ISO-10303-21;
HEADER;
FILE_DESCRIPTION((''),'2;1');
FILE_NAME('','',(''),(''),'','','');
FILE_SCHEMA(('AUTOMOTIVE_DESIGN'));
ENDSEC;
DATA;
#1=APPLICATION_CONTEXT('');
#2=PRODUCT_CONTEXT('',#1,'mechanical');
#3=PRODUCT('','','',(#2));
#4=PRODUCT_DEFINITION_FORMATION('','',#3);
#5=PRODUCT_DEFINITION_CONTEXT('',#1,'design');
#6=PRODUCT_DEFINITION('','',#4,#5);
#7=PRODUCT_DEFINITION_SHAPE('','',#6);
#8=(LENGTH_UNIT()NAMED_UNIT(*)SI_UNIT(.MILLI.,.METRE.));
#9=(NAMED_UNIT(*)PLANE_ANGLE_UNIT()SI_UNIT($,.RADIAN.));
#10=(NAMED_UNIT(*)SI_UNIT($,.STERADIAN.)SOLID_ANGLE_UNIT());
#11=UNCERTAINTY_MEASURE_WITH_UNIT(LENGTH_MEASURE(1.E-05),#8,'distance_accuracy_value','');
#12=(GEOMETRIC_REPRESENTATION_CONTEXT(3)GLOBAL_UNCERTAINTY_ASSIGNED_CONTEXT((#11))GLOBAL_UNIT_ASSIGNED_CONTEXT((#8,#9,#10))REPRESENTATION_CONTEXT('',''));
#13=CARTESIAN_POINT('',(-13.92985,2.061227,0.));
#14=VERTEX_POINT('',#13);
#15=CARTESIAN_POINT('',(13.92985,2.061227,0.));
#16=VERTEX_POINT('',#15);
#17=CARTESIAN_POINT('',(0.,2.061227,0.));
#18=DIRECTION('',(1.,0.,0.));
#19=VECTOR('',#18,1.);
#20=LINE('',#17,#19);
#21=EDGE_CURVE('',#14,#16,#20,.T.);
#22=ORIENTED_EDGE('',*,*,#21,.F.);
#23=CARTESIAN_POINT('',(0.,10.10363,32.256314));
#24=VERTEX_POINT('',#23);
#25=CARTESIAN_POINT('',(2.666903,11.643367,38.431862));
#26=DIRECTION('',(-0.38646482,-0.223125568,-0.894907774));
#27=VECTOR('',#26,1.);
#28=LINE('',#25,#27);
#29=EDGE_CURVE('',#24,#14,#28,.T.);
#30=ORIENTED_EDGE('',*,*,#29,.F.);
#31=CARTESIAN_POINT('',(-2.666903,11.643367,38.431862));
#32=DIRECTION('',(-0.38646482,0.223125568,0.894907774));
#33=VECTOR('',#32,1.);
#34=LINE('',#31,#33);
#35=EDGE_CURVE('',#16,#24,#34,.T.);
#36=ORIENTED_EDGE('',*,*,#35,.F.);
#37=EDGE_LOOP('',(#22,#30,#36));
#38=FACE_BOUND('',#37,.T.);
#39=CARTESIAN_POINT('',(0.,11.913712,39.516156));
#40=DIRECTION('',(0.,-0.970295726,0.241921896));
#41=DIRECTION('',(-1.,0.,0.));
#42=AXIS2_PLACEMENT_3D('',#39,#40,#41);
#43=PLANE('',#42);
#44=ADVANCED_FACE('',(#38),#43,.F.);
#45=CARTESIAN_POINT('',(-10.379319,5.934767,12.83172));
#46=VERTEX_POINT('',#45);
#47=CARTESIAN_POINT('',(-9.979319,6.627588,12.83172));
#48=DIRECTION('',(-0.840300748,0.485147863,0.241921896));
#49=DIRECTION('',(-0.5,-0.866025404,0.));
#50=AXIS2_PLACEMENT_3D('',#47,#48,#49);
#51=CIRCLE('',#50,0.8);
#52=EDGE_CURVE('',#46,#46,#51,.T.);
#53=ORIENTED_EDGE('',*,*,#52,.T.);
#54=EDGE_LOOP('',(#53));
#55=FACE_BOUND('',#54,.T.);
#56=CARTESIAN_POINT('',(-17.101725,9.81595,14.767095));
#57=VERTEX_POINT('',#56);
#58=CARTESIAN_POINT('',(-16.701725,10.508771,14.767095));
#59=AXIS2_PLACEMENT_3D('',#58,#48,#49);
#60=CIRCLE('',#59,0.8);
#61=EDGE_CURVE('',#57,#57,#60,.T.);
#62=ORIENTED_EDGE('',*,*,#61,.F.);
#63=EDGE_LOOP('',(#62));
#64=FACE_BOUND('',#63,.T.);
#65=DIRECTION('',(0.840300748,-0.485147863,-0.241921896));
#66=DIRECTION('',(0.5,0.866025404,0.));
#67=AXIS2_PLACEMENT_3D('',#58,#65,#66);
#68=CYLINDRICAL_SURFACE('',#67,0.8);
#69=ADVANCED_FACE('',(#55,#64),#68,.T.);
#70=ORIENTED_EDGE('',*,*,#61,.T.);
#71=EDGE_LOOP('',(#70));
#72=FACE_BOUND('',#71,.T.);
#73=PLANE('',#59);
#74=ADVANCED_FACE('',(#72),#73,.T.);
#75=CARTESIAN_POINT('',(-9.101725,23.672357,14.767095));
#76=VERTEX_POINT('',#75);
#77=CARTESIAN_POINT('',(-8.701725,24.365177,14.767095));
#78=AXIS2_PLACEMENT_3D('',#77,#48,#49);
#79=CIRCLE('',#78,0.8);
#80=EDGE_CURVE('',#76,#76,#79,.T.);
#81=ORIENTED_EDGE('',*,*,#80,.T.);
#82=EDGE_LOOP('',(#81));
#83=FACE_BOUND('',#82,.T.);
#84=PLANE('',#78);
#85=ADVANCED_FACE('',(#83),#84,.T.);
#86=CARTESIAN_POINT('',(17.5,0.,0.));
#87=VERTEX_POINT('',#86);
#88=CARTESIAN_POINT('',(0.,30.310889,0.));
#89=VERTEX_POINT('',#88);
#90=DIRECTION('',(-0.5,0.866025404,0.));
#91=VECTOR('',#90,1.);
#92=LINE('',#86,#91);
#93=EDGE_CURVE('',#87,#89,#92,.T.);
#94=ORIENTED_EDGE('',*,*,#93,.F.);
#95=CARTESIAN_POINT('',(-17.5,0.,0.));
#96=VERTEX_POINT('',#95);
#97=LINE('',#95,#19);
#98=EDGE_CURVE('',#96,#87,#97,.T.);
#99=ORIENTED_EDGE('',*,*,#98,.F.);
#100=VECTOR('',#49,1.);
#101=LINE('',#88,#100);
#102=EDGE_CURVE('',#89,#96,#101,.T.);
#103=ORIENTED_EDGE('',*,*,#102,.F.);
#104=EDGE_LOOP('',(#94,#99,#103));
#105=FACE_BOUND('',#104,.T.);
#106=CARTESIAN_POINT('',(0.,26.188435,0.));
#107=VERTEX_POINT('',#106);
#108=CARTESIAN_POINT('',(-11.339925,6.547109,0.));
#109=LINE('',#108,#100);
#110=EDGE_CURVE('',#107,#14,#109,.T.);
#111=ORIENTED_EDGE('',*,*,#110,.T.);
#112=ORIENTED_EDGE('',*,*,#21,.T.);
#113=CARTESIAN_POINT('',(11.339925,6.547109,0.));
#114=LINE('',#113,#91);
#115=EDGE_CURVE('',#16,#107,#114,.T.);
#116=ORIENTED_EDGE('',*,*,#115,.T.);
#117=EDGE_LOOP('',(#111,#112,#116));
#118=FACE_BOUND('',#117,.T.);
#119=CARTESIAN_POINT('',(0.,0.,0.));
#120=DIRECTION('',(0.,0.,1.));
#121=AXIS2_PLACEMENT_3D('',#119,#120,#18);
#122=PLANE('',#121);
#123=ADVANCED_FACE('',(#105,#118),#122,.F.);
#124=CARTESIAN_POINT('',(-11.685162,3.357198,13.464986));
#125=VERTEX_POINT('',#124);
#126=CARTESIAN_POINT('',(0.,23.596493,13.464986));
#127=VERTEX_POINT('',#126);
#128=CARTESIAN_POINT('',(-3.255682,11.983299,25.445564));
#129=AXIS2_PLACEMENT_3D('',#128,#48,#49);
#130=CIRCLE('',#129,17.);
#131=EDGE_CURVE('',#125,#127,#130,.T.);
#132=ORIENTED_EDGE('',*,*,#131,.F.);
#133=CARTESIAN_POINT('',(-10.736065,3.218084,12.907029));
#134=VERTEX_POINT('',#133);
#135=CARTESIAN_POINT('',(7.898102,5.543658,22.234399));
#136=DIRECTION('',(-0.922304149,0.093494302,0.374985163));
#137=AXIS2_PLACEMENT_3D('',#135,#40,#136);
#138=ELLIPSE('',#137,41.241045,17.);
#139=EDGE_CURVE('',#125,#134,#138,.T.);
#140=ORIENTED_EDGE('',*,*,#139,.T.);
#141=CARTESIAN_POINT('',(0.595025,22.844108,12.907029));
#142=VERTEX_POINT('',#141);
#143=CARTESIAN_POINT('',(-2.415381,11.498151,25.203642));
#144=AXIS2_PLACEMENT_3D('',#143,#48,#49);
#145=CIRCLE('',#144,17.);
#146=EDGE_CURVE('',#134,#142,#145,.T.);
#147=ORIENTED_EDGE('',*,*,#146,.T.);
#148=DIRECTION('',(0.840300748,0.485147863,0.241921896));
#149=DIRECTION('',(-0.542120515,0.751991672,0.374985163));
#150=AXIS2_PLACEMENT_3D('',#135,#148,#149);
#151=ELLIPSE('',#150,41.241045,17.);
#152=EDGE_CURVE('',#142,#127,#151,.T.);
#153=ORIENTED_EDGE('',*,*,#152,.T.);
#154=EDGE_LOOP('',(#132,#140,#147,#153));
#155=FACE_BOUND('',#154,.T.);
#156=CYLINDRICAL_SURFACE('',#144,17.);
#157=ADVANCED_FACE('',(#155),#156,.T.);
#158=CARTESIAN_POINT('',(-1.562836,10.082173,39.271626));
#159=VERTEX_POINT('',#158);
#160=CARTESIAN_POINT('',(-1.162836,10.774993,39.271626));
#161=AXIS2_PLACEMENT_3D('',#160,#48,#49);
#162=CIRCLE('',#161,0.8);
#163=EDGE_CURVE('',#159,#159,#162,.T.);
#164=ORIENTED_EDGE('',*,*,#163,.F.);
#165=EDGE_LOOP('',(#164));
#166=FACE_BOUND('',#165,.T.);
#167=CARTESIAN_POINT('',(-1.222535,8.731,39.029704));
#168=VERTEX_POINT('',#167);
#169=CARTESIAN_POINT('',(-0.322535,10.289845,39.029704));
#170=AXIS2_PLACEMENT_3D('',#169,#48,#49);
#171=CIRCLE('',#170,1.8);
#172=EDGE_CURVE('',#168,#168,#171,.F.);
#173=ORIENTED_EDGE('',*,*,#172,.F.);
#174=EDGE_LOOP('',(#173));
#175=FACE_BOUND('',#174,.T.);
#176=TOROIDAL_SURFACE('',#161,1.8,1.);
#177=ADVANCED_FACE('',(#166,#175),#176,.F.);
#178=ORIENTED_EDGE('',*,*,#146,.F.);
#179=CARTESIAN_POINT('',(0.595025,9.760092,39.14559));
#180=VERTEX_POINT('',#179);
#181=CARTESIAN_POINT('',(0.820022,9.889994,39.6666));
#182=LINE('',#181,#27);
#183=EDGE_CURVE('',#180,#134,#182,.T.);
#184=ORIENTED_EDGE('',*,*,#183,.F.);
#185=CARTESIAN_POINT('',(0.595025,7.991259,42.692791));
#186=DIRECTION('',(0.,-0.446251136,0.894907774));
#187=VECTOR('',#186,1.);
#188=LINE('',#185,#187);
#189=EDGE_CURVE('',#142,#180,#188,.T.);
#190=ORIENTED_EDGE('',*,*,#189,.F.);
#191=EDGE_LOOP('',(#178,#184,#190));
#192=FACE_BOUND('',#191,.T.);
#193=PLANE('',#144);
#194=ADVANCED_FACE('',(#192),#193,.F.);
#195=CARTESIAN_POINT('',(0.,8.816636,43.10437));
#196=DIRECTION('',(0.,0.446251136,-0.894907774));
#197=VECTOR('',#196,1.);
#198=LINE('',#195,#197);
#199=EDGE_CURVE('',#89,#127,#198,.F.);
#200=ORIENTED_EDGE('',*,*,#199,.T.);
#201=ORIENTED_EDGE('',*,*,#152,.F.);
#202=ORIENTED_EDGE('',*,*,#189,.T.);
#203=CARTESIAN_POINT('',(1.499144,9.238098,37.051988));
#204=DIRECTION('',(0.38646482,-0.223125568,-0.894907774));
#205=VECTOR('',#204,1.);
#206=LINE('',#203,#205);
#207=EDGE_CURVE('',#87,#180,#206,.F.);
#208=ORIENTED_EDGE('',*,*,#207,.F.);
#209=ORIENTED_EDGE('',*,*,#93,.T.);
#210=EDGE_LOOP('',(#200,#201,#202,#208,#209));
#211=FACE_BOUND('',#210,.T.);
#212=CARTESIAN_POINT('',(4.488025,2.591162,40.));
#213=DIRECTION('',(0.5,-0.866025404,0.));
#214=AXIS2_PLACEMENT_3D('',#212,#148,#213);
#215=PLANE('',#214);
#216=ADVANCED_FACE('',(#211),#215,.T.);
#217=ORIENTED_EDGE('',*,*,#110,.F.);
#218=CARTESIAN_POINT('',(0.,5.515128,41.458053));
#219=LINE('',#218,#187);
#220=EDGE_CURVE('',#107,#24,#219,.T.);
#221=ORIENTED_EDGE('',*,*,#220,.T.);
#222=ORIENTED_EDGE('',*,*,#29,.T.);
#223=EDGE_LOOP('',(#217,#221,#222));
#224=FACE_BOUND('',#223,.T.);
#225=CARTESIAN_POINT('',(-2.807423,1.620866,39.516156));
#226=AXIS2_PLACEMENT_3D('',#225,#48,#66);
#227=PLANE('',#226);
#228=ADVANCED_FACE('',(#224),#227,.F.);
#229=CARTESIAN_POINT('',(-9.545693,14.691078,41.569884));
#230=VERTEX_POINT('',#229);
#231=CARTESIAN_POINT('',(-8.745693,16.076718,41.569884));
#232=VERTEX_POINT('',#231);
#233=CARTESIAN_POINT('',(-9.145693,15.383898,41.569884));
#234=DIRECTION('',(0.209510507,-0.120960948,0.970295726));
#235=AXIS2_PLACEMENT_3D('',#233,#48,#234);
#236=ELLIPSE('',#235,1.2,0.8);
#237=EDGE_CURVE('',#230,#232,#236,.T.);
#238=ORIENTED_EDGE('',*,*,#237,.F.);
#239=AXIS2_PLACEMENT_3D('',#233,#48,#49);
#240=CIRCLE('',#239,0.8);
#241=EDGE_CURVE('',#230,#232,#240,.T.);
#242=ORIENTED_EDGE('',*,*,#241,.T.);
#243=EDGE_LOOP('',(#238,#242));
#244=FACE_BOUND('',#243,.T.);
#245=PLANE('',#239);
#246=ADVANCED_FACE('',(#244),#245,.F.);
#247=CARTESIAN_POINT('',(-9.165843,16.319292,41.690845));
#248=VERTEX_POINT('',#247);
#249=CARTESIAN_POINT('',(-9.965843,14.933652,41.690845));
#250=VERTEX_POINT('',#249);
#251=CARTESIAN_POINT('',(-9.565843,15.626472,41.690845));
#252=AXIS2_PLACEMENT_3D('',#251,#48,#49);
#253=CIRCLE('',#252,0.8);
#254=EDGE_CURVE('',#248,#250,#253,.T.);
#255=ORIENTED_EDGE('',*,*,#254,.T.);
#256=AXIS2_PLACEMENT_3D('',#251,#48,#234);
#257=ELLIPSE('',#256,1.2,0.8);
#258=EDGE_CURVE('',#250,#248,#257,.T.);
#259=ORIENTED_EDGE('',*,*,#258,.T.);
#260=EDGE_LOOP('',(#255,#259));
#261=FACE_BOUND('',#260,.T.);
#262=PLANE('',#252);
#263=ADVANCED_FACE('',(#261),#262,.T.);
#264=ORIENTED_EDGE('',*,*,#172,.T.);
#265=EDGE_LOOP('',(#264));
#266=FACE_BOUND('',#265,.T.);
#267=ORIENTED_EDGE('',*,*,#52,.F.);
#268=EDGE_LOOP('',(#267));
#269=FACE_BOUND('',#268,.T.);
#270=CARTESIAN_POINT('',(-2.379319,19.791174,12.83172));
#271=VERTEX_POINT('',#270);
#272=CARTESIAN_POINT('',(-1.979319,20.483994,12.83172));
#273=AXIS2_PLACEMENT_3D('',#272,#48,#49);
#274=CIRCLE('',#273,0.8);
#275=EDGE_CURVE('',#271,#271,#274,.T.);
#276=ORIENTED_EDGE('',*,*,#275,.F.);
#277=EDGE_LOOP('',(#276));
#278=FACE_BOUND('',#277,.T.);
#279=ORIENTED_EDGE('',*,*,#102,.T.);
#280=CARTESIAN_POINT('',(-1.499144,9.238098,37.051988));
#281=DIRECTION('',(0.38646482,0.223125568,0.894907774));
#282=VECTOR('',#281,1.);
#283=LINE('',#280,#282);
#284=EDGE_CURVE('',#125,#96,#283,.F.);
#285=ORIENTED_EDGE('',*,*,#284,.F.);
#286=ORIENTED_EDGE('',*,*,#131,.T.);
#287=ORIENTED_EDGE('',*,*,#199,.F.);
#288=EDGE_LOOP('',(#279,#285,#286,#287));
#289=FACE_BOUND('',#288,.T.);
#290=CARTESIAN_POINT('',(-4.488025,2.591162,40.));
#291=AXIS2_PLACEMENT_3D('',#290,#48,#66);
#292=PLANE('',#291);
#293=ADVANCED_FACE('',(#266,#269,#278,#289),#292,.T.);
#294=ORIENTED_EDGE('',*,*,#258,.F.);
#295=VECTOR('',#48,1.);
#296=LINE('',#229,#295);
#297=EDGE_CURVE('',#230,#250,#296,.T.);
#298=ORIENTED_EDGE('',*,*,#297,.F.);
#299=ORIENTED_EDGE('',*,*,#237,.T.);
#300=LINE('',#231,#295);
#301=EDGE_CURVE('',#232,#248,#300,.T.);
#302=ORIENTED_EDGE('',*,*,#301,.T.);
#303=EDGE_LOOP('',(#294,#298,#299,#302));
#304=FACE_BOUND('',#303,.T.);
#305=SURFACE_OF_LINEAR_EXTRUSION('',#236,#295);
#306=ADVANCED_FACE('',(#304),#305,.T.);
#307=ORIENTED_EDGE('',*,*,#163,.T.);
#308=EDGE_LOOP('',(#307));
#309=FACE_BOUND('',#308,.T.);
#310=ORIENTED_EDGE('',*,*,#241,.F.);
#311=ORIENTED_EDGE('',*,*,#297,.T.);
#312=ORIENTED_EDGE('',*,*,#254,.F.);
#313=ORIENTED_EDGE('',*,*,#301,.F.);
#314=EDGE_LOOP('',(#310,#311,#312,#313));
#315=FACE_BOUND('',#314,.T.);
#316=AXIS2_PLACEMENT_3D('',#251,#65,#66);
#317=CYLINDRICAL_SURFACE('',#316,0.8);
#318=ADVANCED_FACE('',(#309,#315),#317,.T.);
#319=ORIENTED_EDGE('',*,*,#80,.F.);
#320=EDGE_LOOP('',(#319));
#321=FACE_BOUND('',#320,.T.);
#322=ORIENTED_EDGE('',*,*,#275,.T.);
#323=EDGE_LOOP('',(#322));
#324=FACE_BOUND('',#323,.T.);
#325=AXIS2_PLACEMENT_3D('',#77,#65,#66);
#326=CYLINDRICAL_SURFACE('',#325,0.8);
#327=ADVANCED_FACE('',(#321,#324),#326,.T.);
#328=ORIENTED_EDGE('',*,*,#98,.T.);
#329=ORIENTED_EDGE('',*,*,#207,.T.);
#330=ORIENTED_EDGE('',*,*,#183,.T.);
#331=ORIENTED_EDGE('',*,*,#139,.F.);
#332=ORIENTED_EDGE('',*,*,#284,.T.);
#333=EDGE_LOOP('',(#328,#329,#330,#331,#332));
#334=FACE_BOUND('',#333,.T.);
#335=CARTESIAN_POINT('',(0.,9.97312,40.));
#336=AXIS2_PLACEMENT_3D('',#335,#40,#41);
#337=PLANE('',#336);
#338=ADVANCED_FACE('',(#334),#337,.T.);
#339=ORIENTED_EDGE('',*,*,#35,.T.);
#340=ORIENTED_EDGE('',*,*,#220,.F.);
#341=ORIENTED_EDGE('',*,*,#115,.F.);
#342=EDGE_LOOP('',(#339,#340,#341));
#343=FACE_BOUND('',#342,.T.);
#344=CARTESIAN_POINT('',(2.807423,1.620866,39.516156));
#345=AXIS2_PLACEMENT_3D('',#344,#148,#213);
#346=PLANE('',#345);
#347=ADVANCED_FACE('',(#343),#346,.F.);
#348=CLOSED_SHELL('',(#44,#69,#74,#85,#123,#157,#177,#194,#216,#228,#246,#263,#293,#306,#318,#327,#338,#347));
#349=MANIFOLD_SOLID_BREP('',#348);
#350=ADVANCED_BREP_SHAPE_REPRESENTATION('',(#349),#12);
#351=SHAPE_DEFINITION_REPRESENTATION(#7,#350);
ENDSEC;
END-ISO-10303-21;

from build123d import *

# Parameters (mm, degrees)
AUFSATZ_LINEAR_AUSTRAGEN1_DEPTH = 40
FASE1_SIZE                      = 40
FASE1_SIZE_2                    = 9.973120114
WANDUNG1_T                      = -2
SKIZZE2_R                       = 17
AUFSATZ_LINEAR_AUSTRAGEN2_DEPTH = 1
SKIZZE3_R                       = 0.8
AUFSATZ_LINEAR_AUSTRAGEN3_DEPTH = 11
VERRUNDUNG1_R                   = 1
SKIZZE4_R                       = 0.8
AUFSATZ_LINEAR_AUSTRAGEN4_DEPTH = 8
AUFSATZ_LINEAR_START            = -0.5
AUFSATZ_LINEAR_AUSTRAGEN5_DEPTH = 0.5


with BuildPart() as part:
    # Skizze1 → Aufsatz-Linear austragen1 (new body)
    with BuildSketch(Plane.XY):
        Polygon((0, 30.310889132), (-17.5, 0), (17.5, 0), align=None)
    extrude(amount=AUFSATZ_LINEAR_AUSTRAGEN1_DEPTH)

    # Fase1
    # the kernel refuses this chamfer: 40, 9.973120114 mm, written as the material it takes off along each edge
    with BuildSketch(Plane(origin=(-121.385689972, 0, 40), x_dir=(0, -0.009314926653100153, -0.9999566151296001), z_dir=(1, 0, 0)), Plane(origin=(69.442844986, -89.967646606, 40), x_dir=(0.008066963115973384, 0.004657463326550014, -0.9999566151296001), z_dir=(-0.5, 0.8660254037844387, 0)), Plane(origin=(51.942844986, 120.278535738, 40), x_dir=(-0.008066963115973531, 0.0046574633265501, -0.9999566151296001), z_dir=(-0.5, -0.8660254037844387, 0))) as fase1_piece_1:
        Polygon((FASE1_SIZE * 0.99995661513, FASE1_SIZE * 0.0093149266531), (-FASE1_SIZE_2 * 0.00931492665285, FASE1_SIZE_2 * 0.999956615102), (0, 0), align=None)
    extrude(amount=242.771379945, mode=Mode.SUBTRACT)

    # Wandung1
    wandung1_openings = [part.faces().sort_by_distance(p)[0] for p in [
        (0, 10.103629711, 0),
    ]]
    offset(amount=WANDUNG1_T, openings=wandung1_openings, kind=Kind.INTERSECTION)

    # Skizze2 → Aufsatz-Linear austragen2 (add)
    with BuildSketch(Plane(origin=(-12.356843578, 7.134226966, 3.557525123), x_dir=(0.20951050732099702, -0.1209609477998327, 0.9702957262759971), z_dir=(-0.8403007481384855, 0.4851478631379986, 0.2419218955996654))):
        with Locations((22.558111296, 8.75)):
            Circle(SKIZZE2_R)
    extrude(amount=-AUFSATZ_LINEAR_AUSTRAGEN2_DEPTH)

    # Skizze3 → Aufsatz-Linear austragen3 (add)
    with BuildSketch(Plane(origin=(-12.356843578, 7.134226966, 3.557525123), x_dir=(0.20951050732099702, -0.1209609477998327, 0.9702957262759971), z_dir=(-0.8403007481384855, 0.4851478631379986, 0.2419218955996654))):
        with Locations(Location((36.558111296, 8.75, 0), (0, 0, 270))):
            Circle(SKIZZE3_R)
    extrude(amount=AUFSATZ_LINEAR_AUSTRAGEN3_DEPTH)

    # Verrundung1
    verrundung1_edges = [part.edges().sort_by_distance(p)[0] for p in [
        (0.077464866, 10.98266578, 39.029704274),
    ]]
    fillet(verrundung1_edges, radius=VERRUNDUNG1_R)

    # Skizze4 → Aufsatz-Linear austragen4 (add)
    with BuildSketch(Plane(origin=(-12.356843578, 7.134226966, 3.557525123), x_dir=(0.20951050732099705, -0.12096094779983271, 0.9702957262759971), z_dir=(-0.8403007481384855, 0.4851478631379987, 0.24192189559966543))):
        with Locations(Location((9.558111296, 16.75, 0), (0, 0, 270))):
            Circle(SKIZZE4_R)
        with Locations(Location((9.558111296, 0.75, 0), (0, 0, 270))):
            Circle(SKIZZE4_R)
    extrude(amount=AUFSATZ_LINEAR_AUSTRAGEN4_DEPTH)

    # Skizze5 → Aufsatz-Linear austragen5 (add)
    with BuildSketch(Plane(origin=(-21.600151808, 12.470853461, 6.218665974), x_dir=(0.209510507320997, -0.1209609477998327, 0.9702957262759971), z_dir=(-0.8403007481384855, 0.4851478631379987, 0.24192189559966537)).offset(AUFSATZ_LINEAR_START)):
        with BuildLine():
            ThreePointArc((36.558111296, 9.55), (35.758111296, 8.75), (36.558111296, 7.95))
            add(Edge.make_bspline(
                [(36.558111296, 7.95), (37.758111296, 7.95), (37.758111296, 8.75), (37.758111296, 9.55), (36.558111296, 9.55)],
                knots=[4.71238898, 4.71238898, 4.71238898, 6.283185307, 6.283185307, 7.853981634, 7.853981634, 7.853981634], degree=2, weights=[1, 0.707106781, 1, 0.707106781, 1]))
        make_face()
    extrude(amount=AUFSATZ_LINEAR_AUSTRAGEN5_DEPTH)


solid = part.part
